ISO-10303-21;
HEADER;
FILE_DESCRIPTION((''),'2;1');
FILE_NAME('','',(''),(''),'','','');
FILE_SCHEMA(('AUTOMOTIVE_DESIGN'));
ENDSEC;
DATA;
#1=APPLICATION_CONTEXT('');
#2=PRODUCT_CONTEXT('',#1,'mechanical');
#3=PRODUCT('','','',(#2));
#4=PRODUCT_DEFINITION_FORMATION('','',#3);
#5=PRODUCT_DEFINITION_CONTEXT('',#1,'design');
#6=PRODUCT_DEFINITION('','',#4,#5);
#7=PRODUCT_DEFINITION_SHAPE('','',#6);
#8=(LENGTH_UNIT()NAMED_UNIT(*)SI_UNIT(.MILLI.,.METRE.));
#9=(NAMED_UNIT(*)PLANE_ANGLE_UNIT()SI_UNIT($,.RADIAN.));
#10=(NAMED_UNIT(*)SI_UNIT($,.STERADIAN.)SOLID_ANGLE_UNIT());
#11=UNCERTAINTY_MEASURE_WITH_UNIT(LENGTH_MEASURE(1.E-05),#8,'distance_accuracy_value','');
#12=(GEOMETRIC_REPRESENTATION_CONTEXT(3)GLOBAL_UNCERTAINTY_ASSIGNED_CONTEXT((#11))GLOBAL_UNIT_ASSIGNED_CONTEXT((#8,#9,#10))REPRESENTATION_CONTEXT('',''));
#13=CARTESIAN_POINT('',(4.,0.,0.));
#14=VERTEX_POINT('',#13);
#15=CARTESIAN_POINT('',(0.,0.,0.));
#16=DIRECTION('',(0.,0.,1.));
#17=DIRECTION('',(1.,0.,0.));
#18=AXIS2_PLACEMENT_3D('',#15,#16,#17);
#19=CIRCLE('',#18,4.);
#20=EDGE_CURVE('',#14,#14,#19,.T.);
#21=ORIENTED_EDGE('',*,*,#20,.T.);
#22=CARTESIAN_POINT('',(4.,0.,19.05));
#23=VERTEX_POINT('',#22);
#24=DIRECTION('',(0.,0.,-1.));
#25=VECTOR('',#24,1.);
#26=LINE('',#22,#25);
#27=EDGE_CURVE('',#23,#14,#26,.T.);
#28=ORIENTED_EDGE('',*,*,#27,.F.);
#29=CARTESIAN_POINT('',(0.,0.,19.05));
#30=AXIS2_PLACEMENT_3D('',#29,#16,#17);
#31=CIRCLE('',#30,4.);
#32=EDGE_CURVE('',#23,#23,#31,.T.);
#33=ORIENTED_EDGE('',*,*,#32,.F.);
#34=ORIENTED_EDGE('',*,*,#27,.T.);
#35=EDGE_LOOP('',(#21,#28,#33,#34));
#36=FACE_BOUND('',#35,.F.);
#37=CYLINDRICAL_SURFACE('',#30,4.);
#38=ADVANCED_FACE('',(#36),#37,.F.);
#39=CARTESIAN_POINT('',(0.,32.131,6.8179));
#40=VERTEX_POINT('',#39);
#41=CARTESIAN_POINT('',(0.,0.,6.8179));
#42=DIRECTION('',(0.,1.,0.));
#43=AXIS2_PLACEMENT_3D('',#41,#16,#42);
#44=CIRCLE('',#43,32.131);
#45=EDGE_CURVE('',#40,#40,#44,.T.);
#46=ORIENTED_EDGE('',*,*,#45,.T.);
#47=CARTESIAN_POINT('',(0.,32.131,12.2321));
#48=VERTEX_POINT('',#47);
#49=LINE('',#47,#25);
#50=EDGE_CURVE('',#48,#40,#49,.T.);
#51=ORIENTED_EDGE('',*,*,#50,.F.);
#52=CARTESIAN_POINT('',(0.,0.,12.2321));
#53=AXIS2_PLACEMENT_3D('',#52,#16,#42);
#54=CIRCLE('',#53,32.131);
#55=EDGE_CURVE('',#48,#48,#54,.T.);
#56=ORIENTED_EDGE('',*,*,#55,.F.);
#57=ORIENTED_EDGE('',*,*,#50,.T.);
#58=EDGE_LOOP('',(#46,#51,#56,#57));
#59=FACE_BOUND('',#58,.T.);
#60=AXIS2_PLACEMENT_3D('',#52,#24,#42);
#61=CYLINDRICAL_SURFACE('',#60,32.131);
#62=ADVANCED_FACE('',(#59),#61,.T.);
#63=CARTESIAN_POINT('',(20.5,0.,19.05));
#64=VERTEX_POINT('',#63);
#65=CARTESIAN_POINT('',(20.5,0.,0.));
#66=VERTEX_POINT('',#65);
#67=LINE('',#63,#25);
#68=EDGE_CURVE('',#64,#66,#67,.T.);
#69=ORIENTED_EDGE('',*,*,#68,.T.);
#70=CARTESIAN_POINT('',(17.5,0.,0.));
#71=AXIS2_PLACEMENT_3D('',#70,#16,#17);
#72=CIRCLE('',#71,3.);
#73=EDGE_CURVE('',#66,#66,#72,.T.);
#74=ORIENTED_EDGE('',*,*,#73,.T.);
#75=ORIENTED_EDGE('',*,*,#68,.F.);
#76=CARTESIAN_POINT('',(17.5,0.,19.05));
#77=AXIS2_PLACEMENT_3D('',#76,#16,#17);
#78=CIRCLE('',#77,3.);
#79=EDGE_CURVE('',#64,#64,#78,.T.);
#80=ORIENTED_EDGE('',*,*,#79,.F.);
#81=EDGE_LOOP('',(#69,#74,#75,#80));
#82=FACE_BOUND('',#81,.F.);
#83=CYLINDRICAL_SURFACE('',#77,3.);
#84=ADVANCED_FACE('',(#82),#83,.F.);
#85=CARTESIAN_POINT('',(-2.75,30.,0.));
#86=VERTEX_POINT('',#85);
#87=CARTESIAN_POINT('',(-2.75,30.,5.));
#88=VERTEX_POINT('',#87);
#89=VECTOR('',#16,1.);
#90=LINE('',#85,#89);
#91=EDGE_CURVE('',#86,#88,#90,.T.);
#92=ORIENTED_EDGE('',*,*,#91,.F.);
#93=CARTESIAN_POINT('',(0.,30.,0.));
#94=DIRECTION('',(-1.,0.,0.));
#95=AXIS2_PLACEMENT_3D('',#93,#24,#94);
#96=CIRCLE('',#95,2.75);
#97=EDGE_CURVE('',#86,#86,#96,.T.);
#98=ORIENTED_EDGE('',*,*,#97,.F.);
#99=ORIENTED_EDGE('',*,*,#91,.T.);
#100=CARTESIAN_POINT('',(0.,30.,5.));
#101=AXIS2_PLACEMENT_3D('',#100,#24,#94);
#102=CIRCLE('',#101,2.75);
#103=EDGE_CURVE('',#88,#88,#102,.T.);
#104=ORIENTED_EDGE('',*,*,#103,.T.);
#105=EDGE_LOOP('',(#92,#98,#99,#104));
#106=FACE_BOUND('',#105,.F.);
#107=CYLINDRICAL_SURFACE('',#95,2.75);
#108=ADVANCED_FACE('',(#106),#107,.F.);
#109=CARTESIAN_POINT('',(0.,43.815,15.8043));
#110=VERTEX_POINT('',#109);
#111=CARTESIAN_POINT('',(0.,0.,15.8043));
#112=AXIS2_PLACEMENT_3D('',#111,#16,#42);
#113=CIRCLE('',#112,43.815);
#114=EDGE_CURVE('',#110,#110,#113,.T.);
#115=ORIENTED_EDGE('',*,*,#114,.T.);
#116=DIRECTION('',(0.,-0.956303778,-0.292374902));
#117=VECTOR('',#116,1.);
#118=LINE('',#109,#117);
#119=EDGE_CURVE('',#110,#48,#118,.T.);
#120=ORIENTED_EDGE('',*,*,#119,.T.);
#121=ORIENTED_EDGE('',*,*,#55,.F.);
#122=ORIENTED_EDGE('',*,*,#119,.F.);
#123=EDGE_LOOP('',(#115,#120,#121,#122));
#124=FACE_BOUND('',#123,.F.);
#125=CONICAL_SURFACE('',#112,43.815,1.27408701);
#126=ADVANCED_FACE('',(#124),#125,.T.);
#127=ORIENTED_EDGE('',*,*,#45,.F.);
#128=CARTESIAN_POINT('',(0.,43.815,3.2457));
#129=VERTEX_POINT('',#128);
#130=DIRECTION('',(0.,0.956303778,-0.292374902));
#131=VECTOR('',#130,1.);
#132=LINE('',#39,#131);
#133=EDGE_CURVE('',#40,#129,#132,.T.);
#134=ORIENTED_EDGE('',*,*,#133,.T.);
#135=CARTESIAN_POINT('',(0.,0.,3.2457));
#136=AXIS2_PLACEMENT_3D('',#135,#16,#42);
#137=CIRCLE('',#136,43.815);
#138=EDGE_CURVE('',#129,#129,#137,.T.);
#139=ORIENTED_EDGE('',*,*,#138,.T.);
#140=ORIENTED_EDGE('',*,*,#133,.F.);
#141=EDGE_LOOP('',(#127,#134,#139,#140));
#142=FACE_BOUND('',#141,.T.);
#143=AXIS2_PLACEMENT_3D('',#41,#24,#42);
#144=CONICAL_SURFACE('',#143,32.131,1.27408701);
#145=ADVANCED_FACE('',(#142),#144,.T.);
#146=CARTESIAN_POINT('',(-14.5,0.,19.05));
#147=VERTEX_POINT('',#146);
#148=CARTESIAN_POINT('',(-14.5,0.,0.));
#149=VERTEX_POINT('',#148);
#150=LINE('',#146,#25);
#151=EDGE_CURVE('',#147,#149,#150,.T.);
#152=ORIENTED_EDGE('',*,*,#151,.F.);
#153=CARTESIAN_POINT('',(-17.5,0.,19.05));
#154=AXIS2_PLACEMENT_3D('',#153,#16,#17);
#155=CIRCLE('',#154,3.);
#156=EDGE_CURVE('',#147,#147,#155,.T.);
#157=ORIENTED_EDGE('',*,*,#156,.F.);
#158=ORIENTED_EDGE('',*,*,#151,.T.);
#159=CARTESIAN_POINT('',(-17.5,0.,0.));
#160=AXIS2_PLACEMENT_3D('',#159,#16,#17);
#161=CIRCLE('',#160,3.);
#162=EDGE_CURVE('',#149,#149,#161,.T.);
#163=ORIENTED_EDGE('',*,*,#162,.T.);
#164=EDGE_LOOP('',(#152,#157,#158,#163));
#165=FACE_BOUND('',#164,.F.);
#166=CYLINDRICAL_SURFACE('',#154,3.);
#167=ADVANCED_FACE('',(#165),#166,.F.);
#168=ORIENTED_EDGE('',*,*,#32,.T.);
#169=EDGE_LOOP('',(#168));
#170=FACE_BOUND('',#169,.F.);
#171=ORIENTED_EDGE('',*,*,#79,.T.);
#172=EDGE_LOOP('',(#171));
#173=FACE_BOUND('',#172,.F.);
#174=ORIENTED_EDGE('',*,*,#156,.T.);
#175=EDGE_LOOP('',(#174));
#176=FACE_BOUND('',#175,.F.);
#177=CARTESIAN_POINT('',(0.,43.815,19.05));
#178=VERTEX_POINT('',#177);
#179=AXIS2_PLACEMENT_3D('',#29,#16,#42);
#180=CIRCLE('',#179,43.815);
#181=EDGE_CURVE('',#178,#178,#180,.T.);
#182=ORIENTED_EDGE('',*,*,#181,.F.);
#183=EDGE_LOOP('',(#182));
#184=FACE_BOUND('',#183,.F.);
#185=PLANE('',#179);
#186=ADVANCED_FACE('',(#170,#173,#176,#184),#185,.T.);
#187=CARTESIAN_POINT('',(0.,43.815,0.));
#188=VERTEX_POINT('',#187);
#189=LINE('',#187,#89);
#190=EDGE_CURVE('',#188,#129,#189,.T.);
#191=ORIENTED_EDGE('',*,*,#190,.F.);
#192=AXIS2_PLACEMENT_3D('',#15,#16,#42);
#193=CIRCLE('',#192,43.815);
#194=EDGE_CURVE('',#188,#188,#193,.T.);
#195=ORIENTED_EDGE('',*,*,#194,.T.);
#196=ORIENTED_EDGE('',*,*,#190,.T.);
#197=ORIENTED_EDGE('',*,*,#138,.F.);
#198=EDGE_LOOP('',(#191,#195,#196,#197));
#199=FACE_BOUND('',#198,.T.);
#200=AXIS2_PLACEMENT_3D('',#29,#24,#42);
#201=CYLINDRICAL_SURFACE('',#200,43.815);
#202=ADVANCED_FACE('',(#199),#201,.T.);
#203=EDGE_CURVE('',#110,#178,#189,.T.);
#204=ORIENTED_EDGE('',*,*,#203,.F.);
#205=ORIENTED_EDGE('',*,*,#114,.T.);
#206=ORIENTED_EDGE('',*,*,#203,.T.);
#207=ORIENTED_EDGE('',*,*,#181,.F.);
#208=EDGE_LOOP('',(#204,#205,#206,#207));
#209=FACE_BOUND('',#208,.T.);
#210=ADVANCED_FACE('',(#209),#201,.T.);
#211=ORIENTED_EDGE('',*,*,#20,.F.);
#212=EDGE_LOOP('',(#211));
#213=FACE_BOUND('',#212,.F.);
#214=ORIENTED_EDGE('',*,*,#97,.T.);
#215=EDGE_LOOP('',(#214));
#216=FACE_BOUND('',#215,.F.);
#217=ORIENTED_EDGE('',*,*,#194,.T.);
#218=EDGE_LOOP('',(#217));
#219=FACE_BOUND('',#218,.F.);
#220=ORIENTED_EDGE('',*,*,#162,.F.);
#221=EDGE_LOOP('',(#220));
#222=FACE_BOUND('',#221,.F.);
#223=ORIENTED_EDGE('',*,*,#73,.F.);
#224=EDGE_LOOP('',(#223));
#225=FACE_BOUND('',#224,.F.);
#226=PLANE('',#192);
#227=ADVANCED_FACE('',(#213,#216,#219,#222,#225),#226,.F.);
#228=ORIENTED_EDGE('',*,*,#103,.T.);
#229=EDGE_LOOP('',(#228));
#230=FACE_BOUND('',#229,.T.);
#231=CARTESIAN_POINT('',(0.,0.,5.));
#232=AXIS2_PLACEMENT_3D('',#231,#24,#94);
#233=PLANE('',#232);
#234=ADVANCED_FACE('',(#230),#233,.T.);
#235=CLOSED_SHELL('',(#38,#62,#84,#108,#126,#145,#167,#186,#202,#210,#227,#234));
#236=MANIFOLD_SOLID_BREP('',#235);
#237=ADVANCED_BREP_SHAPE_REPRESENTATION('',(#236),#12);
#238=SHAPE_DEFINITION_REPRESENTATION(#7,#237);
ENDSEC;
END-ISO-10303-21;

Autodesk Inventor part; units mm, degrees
ref_plane "YZ Plane" through (0, 0, 0) normal (1, 0, 0) x (0, 1, 0)
ref_plane "XZ Plane" through (0, 0, 0) normal (0, 1, 0) x (-1, 0, 0)
sketch "Main Sketch" plane through (0, 0, 0) normal (1, 0, 0) x (0, 1, 0)
  line L0 (0, 19.05) -> (43.815, 19.05)
  line L1 (43.815, 19.05) -> (43.815, 15.8043)
  line L2 (43.815, 15.8043) -> (32.131, 12.2321)
  line L3 (32.131, 12.2321) -> (32.131, 6.8179)
  line L4 (32.131, 6.8179) -> (43.815, 3.2457)
  line L5 (43.815, 3.2457) -> (43.815, 0)
  line L6 (43.815, 0) -> (0, 0)
  line L7 (40.64, 14.8336) -> (40.64, 4.2164) construction
  line L8 (32.131, 9.525) -> (40.64, 9.525) construction
  line L9 (43.815, 15.8043) -> (43.815, 3.2457)
  line L10 (0, -4) -> (0, 24) projected
  line L11 (0, 0) -> (0, 19.05)
  dimension "d0" = 10.6172
  dimension "d1" = 34
  dimension "d2" = 3.175
  dimension "d6" = 19.05
  dimension "d21" = 81.28
  dimension "d25" = 11.684
  dimension "d27" = 9.525
ref_plane "Belt Plane" through (0, 32.131, 9.525) normal (0, 0, 1) x (1, 0, 0)
revolve "Body" add sketch "Main Sketch" angle 360 about axis through (0, 0, -10) along (0, 0, 1)
revolve "Groove" cut sketch "Main Sketch" angle 360 about axis through (0, 0, -10) along (0, 0, 1) contours L9 L4 L3 L2
fillet "Fillet External" [suppressed]
fillet "Fillet Internal" [suppressed]
pattern_of_one "Groove Pattern"
sketch "Sketch2" plane through (0, 0, 0) normal (0, 0, -1) x (-1, 0, 0)
  circle A0 centre (0, 0) radius 43.815 projected
  line L0 (0, 0) -> (0, 30) construction
  circle A1 centre (0, 30) radius 2.75
  dimension "d28" = 5.5
  dimension "d29" = 30
extrude "Extrusion1" cut sketch "Sketch2" against normal blind 5 contours A1
sketch "Sketch3" plane through (0, 0, 19.05) normal (0, 0, 1) x (1, 0, 0)
  circle A0 centre (0, 0) radius 43.815 projected
  circle A1 centre (0, 0) radius 4
  line L0 (-17.5, 0) -> (17.5, 0) construction
  circle A2 centre (-17.5, 0) radius 3
  circle A3 centre (17.5, 0) radius 3
  dimension "d32" = 8
  dimension "d33" = 35
  dimension "d34" = 6
extrude "Extrusion2" cut sketch "Sketch3" against normal through all contours A1 | A2 | A3
equation "\"d0\" = da_Bw"
equation "\"d1\" = da_Alfa"
equation "\"d2\" = da_c"
equation "\"d21\" = da_Dw"
equation "\"d25\" = da_Hd"
equation "\"d27\" = da_Se"
equation "\"da_r1\" = 0"
equation "\"da_r2\" = 0"
equation "\"d18\" = da_Sg"
equation "\"d5\" = da_Se"
equation "\"da_Bw\" = 10.6172"
equation "\"da_Alfa\" = 34deg"
equation "\"da_c\" = 3.175"
equation "\"da_Dw\" = 81.28"
equation "\"da_Hd\" = 11.684"
equation "\"da_Se\" = 9.525"
equation "\"da_Sg\" = 15.875"
properties part number "Grooved Pulley1" material "Steel"
